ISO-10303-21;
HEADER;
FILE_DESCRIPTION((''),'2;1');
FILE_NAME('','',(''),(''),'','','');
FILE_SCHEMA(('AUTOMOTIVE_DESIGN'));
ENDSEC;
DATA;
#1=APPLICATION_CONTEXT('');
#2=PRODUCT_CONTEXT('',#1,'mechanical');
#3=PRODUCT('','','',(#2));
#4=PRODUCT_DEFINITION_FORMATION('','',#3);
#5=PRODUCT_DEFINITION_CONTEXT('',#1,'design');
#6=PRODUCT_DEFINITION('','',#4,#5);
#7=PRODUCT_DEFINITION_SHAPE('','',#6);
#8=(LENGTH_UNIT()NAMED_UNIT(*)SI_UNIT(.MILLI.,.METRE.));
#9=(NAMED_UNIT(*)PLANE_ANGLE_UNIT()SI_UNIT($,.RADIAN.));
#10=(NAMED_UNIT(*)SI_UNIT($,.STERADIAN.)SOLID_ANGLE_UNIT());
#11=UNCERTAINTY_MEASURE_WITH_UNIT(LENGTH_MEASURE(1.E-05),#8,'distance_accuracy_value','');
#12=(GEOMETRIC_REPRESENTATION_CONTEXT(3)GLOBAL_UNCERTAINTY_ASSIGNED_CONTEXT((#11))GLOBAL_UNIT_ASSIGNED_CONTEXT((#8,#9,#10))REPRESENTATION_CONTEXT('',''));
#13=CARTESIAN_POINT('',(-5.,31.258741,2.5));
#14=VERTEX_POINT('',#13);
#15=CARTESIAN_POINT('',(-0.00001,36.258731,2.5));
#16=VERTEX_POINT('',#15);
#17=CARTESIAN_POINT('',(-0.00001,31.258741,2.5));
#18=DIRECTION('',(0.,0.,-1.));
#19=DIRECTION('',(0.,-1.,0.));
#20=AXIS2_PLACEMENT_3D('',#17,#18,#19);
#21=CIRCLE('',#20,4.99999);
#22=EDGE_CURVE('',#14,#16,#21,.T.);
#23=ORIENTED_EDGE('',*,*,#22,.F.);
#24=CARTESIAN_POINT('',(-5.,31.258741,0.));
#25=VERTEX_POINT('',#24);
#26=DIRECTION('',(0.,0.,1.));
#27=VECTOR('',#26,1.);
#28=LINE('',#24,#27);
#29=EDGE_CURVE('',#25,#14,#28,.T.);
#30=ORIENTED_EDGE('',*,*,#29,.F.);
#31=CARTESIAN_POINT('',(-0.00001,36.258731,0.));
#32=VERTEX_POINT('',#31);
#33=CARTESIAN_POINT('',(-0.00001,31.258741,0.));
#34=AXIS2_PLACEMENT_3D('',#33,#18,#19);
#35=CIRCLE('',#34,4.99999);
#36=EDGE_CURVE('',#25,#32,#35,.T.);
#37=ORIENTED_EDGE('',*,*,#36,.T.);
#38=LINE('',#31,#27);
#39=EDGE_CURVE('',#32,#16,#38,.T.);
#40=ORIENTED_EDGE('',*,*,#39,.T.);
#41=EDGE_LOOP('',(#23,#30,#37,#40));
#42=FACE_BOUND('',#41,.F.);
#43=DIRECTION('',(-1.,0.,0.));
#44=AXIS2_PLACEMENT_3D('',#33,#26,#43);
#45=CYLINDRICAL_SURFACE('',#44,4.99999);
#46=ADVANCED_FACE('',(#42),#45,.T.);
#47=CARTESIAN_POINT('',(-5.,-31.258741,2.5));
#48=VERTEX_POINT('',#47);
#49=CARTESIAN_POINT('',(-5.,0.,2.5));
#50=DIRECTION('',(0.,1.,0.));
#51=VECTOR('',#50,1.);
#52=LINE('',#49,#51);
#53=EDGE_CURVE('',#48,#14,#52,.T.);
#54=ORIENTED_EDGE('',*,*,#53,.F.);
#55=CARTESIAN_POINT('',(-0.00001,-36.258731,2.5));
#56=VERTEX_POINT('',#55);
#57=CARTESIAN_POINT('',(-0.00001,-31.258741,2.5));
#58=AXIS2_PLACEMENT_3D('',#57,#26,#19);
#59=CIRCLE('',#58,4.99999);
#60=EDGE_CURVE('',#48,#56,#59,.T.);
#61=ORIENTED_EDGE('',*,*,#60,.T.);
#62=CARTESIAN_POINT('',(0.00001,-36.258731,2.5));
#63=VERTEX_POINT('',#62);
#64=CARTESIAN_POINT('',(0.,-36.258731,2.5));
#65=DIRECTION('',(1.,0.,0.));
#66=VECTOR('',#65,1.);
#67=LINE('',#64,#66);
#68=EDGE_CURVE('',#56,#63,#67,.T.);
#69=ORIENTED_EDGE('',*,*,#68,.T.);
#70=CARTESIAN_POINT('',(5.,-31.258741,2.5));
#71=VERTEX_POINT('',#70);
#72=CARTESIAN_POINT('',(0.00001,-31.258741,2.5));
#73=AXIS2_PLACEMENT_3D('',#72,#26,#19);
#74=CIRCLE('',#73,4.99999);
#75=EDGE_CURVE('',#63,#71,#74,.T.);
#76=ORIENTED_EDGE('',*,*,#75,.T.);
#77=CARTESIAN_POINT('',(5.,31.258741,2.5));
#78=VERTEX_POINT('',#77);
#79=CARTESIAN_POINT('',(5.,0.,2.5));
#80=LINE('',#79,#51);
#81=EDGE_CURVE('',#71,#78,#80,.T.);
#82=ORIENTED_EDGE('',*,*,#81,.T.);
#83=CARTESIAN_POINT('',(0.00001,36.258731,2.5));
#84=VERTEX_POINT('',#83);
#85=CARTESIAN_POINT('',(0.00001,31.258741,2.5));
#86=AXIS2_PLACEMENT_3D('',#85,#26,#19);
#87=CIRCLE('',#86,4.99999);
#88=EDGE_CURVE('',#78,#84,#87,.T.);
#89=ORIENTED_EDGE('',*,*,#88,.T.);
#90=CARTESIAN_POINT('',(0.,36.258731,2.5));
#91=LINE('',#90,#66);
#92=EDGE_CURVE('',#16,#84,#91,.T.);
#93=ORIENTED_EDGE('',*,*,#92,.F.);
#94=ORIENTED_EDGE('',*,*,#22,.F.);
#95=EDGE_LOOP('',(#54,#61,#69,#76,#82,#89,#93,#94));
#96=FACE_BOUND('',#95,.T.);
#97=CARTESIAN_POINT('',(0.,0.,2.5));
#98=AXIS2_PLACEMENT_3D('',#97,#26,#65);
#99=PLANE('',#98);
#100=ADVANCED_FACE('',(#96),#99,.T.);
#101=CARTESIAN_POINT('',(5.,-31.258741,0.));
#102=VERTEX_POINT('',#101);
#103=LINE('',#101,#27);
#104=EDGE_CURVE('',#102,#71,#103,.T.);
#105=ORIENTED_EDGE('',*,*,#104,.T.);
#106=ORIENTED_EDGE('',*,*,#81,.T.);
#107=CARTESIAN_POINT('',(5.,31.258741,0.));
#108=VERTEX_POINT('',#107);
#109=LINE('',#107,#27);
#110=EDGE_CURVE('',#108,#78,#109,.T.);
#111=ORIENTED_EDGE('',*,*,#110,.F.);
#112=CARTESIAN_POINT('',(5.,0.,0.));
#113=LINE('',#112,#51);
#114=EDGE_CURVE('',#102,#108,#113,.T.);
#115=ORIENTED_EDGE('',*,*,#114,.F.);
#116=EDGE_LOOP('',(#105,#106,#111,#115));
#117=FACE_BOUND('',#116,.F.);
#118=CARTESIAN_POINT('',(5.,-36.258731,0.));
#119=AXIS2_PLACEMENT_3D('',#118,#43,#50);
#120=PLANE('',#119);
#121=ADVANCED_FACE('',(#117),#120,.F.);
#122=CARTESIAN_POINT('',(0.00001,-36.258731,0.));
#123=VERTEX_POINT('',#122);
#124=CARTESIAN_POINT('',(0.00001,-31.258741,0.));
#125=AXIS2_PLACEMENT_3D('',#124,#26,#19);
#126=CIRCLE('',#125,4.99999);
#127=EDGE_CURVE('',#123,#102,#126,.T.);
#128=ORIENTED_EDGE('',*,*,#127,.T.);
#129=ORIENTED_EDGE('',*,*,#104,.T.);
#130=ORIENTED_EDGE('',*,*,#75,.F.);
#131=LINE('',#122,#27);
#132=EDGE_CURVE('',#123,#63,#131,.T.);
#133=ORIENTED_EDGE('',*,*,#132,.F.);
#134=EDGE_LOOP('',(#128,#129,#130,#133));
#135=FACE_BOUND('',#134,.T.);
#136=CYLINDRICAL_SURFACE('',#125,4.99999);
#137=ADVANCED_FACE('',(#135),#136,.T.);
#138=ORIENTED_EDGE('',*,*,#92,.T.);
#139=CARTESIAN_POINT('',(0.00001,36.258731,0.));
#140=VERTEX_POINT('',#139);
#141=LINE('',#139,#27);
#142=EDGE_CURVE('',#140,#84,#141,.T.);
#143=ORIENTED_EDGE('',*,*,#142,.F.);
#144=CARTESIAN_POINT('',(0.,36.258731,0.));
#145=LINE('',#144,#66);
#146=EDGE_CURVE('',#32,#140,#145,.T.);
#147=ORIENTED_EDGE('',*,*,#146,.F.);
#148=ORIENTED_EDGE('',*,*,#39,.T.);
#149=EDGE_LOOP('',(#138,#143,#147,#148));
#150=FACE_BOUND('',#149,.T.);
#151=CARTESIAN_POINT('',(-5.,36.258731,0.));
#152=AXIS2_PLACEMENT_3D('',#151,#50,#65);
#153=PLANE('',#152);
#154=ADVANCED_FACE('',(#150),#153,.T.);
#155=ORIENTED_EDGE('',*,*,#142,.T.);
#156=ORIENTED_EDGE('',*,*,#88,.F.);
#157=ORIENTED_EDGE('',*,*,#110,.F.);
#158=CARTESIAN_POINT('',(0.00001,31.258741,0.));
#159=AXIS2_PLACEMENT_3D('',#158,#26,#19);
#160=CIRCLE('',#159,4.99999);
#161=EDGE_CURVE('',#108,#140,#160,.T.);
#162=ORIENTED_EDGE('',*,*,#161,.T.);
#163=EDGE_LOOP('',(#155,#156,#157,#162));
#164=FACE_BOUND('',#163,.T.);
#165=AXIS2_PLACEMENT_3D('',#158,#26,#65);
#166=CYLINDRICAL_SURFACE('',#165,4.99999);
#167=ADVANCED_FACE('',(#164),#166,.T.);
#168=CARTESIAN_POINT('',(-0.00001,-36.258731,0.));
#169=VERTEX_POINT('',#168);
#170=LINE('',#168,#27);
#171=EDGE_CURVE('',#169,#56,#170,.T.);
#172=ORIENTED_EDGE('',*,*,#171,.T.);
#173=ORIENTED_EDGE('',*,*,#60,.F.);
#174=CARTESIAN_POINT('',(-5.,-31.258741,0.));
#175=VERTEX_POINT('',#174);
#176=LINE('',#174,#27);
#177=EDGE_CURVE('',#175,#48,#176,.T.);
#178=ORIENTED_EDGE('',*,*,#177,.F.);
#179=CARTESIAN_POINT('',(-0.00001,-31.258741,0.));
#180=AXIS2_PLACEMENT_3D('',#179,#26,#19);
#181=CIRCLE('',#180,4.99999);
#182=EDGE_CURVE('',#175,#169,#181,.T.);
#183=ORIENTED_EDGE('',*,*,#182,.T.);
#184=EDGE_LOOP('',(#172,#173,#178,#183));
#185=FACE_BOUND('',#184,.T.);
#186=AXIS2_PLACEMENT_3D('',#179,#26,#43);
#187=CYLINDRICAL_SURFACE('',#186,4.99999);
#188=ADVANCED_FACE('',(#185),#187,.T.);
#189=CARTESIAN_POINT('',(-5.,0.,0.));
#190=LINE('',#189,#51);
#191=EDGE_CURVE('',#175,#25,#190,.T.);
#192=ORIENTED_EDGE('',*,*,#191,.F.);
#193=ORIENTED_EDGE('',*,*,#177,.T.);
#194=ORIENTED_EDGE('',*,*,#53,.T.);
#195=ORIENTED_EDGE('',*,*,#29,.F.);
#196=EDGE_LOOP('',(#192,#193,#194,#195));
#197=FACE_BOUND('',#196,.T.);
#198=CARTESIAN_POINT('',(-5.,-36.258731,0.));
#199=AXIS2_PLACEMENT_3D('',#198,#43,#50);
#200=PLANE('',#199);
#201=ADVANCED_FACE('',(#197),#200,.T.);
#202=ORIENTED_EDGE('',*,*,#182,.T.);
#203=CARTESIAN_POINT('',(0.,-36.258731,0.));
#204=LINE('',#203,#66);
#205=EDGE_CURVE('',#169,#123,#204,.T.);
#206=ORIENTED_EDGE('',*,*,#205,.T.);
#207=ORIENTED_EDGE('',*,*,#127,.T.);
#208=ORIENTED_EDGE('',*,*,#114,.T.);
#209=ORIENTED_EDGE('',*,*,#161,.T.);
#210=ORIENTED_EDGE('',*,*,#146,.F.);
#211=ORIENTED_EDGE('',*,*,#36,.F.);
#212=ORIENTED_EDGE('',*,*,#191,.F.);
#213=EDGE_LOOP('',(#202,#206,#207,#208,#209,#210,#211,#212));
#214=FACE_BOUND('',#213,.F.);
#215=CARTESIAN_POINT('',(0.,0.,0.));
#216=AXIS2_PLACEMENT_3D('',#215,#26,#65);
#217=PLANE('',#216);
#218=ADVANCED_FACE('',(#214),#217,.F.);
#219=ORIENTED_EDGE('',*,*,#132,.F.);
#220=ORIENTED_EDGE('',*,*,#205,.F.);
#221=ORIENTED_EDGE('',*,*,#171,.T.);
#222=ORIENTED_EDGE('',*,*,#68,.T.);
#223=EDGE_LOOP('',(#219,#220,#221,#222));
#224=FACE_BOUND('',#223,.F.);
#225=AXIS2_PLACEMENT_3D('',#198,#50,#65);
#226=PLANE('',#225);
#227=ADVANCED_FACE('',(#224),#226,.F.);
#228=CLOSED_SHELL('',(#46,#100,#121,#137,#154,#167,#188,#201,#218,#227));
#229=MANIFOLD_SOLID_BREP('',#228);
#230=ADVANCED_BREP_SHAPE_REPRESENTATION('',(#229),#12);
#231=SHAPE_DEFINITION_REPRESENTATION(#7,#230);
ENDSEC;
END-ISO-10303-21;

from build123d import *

# Parameters (mm, degrees)
F0_W     = 10
F0_H     = 72.5174620748
F1_DEPTH = 2.5
F2_R     = 4.99999


# Not quite as in the source:
# - a fillet or chamfer is up to 0.001 mm smaller than in the source, because OpenCascade refuses the exact size


with BuildPart() as f1:
    # F0 (on Top) → F1 (new body)
    with BuildSketch(Plane.XY):
        Rectangle(F0_W, F0_H)
    extrude(amount=F1_DEPTH)

    # F2 (radius 5 in the source; OpenCascade refuses exactly that, so slightly less here)
    f2_edges = [f1.edges().sort_by_distance(p)[0] for p in [
        (5, 36.258731, 1.25),
        (-5, 36.258731, 1.25),
        (-5, -36.258731, 1.25),
        (5, -36.258731, 1.25),
    ]]
    fillet(f2_edges, radius=F2_R)


solid = f1.part
